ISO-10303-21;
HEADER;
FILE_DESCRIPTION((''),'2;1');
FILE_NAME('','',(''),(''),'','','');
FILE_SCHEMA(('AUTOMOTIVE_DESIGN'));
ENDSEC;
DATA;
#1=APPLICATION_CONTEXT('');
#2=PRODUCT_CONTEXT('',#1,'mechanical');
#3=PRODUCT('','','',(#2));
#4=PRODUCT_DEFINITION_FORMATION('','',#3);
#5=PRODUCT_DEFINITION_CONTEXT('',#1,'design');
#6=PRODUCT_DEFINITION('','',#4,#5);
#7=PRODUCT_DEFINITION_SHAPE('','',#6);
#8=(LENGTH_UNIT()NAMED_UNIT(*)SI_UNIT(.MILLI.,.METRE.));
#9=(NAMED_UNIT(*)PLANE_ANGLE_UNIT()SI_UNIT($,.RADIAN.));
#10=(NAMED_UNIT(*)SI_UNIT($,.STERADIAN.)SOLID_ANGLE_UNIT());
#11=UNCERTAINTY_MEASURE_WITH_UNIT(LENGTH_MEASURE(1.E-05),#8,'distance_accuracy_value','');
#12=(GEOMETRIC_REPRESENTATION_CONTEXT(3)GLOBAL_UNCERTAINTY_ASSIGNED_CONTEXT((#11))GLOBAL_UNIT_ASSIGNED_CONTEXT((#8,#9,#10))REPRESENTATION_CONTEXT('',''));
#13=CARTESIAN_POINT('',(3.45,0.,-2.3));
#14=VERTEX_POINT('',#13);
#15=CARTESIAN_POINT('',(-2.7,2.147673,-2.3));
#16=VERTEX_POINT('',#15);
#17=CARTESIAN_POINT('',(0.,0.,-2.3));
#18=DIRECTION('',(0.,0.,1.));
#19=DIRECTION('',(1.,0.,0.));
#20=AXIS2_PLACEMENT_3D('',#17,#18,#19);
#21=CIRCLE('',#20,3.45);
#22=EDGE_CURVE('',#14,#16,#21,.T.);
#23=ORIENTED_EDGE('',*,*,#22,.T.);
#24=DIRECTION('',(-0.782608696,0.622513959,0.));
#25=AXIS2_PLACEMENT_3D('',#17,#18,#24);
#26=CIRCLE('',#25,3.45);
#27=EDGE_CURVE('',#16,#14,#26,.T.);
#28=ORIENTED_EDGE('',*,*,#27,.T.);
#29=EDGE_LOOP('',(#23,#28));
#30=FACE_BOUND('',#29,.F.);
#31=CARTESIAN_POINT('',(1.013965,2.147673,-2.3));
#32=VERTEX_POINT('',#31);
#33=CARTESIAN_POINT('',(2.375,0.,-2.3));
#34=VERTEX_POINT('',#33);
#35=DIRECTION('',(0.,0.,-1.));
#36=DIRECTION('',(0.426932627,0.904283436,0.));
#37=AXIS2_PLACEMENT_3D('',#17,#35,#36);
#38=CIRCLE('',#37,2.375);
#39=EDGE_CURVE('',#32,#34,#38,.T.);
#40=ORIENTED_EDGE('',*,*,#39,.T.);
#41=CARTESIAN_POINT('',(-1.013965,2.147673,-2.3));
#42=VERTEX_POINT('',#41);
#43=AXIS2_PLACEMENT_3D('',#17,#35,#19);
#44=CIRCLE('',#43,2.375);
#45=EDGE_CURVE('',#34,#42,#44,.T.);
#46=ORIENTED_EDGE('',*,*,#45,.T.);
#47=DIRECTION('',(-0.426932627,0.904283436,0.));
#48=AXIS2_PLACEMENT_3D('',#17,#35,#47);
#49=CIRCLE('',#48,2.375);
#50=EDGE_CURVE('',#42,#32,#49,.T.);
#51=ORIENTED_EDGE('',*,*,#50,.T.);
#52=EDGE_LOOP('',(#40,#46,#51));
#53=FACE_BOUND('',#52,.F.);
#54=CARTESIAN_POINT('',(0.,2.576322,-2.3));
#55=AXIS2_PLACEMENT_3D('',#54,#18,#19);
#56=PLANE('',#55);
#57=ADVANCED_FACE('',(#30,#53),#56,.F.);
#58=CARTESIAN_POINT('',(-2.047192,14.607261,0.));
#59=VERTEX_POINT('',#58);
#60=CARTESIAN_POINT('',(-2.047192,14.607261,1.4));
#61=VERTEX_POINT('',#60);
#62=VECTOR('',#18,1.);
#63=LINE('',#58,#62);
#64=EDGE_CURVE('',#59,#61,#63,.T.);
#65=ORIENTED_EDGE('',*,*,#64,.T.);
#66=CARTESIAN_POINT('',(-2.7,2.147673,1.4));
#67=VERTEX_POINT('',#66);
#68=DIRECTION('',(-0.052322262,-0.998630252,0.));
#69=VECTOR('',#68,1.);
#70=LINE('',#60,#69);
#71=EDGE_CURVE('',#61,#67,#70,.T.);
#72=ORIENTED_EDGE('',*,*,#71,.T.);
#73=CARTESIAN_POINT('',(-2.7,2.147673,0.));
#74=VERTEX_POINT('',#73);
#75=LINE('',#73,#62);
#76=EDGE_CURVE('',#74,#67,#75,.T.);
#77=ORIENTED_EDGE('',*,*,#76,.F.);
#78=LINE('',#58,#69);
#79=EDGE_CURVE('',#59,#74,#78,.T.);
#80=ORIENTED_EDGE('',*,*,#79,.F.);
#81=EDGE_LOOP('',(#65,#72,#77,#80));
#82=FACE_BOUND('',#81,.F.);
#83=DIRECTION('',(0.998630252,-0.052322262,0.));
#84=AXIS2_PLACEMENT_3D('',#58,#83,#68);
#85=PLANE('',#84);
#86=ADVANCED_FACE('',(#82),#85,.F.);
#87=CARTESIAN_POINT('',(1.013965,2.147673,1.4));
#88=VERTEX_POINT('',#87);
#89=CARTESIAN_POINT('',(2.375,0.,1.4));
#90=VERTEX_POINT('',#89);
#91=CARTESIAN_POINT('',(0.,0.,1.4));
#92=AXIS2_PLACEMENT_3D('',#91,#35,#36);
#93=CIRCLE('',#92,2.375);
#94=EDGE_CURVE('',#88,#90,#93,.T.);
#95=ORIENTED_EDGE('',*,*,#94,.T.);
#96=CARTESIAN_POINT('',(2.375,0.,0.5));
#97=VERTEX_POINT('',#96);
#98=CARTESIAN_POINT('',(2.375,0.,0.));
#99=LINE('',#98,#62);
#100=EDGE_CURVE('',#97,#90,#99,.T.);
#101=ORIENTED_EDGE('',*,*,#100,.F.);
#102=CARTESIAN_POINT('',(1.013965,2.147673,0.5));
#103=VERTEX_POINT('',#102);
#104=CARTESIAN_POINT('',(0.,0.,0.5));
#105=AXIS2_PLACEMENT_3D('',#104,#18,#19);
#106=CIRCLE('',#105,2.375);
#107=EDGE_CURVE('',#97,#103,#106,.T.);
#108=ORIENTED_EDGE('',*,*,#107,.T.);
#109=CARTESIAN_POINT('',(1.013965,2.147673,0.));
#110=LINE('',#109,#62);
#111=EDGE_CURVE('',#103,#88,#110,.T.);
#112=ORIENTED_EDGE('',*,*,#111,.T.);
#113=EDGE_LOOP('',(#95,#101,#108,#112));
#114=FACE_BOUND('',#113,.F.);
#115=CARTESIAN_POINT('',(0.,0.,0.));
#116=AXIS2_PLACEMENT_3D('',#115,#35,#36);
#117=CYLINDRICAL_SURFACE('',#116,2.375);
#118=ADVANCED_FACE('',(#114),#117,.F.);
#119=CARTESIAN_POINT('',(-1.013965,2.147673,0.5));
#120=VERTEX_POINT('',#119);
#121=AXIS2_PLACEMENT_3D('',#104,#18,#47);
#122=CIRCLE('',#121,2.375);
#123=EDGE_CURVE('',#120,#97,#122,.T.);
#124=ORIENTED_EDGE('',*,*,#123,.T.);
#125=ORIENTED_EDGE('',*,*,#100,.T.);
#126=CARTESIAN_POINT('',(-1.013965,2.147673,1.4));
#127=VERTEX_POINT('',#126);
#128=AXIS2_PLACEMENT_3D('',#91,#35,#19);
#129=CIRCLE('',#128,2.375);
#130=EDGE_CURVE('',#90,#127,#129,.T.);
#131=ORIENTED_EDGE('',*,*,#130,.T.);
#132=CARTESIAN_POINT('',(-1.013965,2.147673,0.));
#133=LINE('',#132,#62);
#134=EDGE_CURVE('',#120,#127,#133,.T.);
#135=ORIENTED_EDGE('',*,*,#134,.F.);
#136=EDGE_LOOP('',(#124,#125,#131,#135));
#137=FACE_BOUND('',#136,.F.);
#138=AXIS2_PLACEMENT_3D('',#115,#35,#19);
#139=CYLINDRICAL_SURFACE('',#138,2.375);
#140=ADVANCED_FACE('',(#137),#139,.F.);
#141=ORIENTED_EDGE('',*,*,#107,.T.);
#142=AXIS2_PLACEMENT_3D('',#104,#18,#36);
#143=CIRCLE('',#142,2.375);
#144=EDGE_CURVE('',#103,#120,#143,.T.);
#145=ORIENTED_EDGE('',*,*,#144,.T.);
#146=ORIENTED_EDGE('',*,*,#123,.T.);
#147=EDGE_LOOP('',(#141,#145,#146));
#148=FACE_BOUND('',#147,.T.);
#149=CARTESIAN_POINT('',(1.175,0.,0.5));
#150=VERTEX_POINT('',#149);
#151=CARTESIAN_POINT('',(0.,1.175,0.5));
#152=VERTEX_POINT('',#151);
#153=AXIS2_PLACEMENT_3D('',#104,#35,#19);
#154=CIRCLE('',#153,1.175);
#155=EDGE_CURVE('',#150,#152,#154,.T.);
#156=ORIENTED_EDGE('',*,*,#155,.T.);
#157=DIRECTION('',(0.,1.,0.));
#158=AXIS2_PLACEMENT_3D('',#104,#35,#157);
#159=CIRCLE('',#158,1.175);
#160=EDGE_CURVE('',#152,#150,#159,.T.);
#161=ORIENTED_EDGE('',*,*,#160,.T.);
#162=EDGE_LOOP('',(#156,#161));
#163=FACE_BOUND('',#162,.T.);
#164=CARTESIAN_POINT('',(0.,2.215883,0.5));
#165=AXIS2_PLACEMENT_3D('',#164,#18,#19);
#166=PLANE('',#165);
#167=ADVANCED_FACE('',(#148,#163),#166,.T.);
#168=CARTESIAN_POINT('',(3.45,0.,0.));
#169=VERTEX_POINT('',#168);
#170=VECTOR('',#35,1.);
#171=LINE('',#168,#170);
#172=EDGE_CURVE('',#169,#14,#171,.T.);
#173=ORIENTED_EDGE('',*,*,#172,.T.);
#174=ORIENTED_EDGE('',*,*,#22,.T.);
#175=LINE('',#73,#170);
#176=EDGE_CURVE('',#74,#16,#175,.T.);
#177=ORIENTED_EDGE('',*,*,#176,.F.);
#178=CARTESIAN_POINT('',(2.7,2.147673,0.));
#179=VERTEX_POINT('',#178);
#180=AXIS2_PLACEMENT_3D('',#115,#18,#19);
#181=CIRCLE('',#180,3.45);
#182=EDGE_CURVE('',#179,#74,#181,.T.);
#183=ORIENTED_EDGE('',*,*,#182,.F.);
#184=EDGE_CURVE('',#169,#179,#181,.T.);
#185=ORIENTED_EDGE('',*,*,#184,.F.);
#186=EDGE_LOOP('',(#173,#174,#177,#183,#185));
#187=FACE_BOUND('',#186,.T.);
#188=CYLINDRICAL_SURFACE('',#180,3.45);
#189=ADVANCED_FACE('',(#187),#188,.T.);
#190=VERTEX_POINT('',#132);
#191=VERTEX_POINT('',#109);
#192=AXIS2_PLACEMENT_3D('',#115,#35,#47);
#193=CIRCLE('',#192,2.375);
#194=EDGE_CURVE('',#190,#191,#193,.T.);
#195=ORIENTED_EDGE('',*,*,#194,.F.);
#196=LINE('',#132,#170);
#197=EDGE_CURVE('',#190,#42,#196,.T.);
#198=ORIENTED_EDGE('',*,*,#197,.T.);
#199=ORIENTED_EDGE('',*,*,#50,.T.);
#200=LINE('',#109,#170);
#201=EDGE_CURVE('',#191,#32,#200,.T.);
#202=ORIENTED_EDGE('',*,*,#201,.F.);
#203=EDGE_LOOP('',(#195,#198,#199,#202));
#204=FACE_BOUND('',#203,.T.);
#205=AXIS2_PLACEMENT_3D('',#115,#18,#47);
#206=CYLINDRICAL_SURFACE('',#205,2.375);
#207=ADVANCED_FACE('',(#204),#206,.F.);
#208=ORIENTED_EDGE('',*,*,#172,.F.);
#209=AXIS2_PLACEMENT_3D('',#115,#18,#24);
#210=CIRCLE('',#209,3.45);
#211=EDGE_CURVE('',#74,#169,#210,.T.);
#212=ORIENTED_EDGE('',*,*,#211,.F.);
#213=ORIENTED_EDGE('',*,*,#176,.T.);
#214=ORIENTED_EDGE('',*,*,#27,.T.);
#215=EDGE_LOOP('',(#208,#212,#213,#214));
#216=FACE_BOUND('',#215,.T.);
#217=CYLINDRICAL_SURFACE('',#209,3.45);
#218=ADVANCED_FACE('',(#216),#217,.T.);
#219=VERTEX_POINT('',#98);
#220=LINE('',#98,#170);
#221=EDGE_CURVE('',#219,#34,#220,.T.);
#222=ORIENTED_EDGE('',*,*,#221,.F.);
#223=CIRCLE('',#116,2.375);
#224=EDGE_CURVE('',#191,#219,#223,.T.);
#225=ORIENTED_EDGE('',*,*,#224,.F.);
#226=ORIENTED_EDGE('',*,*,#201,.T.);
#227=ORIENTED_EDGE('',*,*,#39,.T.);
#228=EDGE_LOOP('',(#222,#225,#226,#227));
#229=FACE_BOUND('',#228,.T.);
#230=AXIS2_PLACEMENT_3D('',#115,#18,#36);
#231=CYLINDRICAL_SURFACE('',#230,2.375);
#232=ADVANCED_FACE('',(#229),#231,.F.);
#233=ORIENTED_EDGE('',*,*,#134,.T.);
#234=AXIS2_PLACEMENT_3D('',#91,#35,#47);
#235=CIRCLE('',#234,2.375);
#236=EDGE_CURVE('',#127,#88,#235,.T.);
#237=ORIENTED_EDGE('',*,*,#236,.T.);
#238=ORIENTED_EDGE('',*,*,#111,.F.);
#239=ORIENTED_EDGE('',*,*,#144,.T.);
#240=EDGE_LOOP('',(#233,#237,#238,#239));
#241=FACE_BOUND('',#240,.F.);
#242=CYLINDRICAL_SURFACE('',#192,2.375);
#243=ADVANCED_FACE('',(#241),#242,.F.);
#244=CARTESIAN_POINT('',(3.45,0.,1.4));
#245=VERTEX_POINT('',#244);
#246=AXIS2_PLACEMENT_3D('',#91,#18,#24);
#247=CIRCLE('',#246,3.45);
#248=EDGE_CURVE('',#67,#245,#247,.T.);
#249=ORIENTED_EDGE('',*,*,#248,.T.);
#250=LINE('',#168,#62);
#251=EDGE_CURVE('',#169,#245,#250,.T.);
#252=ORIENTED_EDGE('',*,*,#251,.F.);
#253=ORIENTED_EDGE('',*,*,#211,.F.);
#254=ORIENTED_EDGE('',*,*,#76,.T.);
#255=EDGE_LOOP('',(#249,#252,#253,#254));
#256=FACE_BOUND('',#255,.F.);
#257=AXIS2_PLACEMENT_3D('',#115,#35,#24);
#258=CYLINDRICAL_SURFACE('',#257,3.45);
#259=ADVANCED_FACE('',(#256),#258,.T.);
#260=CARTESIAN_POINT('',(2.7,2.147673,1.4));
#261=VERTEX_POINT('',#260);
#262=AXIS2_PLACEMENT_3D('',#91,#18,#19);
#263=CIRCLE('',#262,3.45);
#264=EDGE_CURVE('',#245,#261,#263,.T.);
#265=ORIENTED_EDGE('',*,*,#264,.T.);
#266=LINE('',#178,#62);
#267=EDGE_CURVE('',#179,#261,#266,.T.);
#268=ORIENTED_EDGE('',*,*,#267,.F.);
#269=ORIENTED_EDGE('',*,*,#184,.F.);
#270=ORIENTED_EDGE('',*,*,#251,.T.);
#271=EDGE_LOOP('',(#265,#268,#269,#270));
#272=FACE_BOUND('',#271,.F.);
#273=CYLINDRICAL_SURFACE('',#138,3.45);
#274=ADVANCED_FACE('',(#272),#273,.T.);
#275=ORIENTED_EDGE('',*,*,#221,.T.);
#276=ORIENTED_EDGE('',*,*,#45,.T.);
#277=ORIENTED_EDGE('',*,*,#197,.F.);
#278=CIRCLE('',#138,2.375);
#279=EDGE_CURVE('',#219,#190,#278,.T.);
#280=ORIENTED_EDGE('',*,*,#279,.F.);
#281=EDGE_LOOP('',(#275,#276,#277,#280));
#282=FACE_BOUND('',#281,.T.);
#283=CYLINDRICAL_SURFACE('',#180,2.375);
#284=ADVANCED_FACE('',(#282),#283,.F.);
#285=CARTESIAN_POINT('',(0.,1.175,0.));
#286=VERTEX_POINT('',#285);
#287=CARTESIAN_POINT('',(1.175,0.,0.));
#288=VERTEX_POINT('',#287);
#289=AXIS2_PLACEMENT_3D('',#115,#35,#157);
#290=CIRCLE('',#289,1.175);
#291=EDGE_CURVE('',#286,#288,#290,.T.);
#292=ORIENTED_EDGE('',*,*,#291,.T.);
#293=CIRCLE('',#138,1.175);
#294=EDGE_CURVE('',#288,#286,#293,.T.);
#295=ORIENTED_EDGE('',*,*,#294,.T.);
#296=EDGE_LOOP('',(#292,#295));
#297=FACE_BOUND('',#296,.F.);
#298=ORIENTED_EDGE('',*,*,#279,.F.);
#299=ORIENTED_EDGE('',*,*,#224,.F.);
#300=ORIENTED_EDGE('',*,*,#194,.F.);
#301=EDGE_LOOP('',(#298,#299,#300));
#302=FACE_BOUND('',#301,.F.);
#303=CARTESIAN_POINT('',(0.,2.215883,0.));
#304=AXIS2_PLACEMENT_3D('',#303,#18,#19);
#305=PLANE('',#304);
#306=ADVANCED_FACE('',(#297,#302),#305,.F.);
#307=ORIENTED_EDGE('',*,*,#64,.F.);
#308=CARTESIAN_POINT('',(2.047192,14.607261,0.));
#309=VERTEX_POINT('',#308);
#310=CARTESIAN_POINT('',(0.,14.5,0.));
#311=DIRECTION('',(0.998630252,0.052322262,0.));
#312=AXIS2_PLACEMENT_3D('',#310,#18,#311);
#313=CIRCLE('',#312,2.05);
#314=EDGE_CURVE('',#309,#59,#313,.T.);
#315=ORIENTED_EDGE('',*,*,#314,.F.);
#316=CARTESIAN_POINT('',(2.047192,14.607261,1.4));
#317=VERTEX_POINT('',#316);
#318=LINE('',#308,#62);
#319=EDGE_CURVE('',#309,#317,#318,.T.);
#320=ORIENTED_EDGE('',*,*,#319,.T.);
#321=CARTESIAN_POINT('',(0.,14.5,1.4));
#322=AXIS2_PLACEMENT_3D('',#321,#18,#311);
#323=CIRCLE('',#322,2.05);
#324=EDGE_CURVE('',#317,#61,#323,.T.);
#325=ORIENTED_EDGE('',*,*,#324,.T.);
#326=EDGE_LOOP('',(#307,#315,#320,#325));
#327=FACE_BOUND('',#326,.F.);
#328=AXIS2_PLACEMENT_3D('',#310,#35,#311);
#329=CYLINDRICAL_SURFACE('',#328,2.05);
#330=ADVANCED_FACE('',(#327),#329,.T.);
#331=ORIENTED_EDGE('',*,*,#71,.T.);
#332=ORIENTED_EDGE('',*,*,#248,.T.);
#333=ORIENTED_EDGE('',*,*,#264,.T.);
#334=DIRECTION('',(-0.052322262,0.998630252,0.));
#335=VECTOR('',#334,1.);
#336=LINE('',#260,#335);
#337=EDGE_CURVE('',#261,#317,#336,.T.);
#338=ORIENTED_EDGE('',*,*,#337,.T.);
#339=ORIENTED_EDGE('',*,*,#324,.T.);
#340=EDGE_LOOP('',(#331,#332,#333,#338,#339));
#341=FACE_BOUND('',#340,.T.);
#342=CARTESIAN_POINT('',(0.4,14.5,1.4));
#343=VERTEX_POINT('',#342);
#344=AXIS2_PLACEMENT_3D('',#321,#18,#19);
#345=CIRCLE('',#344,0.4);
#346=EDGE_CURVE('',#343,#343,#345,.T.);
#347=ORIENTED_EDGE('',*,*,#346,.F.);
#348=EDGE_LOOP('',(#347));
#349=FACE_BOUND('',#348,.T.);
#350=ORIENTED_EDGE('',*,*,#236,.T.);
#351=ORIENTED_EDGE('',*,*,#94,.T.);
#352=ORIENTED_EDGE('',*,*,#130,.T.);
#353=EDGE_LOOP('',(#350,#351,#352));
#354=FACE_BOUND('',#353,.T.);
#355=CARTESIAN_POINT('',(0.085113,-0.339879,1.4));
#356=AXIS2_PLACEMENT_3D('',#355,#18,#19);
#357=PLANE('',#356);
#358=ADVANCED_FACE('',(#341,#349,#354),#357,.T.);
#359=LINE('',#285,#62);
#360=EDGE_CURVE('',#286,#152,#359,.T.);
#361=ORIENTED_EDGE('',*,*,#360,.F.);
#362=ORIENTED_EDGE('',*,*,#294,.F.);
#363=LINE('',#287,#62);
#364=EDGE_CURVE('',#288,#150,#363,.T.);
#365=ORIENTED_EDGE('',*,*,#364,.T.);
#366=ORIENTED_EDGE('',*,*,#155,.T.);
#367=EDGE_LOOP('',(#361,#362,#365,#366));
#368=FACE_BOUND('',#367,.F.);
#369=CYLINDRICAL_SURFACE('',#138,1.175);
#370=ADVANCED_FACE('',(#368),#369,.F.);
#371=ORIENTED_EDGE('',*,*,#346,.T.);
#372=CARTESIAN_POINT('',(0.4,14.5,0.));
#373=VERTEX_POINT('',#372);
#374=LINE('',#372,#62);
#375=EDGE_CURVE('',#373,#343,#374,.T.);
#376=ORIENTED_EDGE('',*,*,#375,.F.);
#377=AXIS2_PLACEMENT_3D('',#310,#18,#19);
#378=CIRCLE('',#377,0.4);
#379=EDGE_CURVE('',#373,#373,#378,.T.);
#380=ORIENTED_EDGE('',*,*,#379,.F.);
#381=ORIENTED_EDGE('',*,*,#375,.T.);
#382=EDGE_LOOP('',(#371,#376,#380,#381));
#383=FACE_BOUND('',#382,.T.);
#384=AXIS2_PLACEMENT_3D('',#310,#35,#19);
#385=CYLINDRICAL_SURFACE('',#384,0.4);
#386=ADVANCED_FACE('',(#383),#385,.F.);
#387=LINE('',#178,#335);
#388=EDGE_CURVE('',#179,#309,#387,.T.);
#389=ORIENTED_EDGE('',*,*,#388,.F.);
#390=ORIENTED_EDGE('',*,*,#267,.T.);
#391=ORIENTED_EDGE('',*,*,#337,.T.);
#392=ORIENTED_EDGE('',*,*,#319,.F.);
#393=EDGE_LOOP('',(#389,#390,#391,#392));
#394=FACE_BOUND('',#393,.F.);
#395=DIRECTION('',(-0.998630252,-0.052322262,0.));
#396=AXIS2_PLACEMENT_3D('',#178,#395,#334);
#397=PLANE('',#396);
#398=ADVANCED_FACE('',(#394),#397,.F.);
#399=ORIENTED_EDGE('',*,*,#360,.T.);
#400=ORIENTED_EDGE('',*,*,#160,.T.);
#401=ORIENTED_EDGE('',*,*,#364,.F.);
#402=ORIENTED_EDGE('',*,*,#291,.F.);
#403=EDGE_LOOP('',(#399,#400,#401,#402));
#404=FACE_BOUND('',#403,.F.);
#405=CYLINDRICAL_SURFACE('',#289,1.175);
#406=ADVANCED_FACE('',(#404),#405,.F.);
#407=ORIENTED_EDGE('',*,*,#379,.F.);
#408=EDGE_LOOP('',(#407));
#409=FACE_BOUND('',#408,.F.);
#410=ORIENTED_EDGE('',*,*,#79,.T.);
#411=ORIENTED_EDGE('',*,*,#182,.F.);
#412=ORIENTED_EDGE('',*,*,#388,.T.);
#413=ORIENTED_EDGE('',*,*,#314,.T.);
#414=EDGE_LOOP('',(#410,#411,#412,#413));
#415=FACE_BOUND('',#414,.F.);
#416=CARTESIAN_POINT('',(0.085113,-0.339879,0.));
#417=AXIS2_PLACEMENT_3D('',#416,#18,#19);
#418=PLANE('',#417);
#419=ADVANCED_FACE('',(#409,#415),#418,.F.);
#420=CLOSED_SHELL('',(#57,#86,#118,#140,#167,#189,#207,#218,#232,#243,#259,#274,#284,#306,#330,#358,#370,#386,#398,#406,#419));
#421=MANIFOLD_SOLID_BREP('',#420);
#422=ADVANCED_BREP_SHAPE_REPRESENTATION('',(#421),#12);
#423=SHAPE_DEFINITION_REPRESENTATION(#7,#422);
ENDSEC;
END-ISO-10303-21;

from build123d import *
from build123d import SkipClean  # not in build123d's __all__

# Parameters (mm, degrees)
F0_R     = 0.4
F1_DEPTH = 1.4
F2_DEPTH = 2.3
F3_DEPTH = 0.5


with BuildPart() as f1:
    # F0 (on Top) → F1 (new body)
    with BuildSketch(Plane.XY):
        with BuildLine():
            ThreePointArc((-2.7, 2.1476731595), (-1.1374313166, -3.2571076126), (3.45, 0))
            ThreePointArc((3.45, 0), (3.2571076126, 1.1374313166), (2.7, 2.1476731595))
            Line((2.7, 2.1476731595), (1.0139649895, 2.1476731595))
            ThreePointArc((1.0139649895, 2.1476731595), (2.0060897101, 1.2713099838), (2.375, 0))
            ThreePointArc((2.375, 0), (-1.2713099838, -2.0060897101), (-1.0139649895, 2.1476731595))
            Line((-1.0139649895, 2.1476731595), (-2.7, 2.1476731595))
        make_face()
        with BuildLine():
            Line((1.0139649895, 2.1476731595), (2.7, 2.1476731595))
            ThreePointArc((2.7, 2.1476731595), (0, 3.45), (-2.7, 2.1476731595))
            Line((-2.7, 2.1476731595), (-1.0139649895, 2.1476731595))
            ThreePointArc((-1.0139649895, 2.1476731595), (0, 2.375), (1.0139649895, 2.1476731595))
        make_face()
        with BuildLine():
            ThreePointArc((-2.7, 2.1476731595), (0, 3.45), (2.7, 2.1476731595))
            Line((2.7, 2.1476731595), (2.0471920173, 14.6072606371))
            ThreePointArc((2.0471920173, 14.6072606371), (2.0492978841, 14.553648693), (2.05, 14.5))
            ThreePointArc((2.05, 14.5), (-0.053648693, 12.4507021159), (-2.0471920173, 14.6072606371))
            Line((-2.0471920173, 14.6072606371), (-2.7, 2.1476731595))
        make_face()
        with BuildLine():
            ThreePointArc((2.05, 14.5), (2.0492978841, 14.553648693), (2.0471920173, 14.6072606371))
            ThreePointArc((2.0471920173, 14.6072606371), (0, 16.55), (-2.0471920173, 14.6072606371))
            ThreePointArc((-2.0471920173, 14.6072606371), (-0.053648693, 12.4507021159), (2.05, 14.5))
        make_face()
        with Locations((0, 14.5)):
            Circle(F0_R, mode=Mode.SUBTRACT)
    extrude(amount=F1_DEPTH)

    # F0 (on Top) → F2 (join)
    with BuildSketch(Plane.XY):
        with BuildLine():
            Line((1.0139649895, 2.1476731595), (2.7, 2.1476731595))
            ThreePointArc((2.7, 2.1476731595), (0, 3.45), (-2.7, 2.1476731595))
            Line((-2.7, 2.1476731595), (-1.0139649895, 2.1476731595))
            ThreePointArc((-1.0139649895, 2.1476731595), (0, 2.375), (1.0139649895, 2.1476731595))
        make_face()
        with BuildLine():
            ThreePointArc((-2.7, 2.1476731595), (-1.1374313166, -3.2571076126), (3.45, 0))
            ThreePointArc((3.45, 0), (3.2571076126, 1.1374313166), (2.7, 2.1476731595))
            Line((2.7, 2.1476731595), (1.0139649895, 2.1476731595))
            ThreePointArc((1.0139649895, 2.1476731595), (2.0060897101, 1.2713099838), (2.375, 0))
            ThreePointArc((2.375, 0), (-1.2713099838, -2.0060897101), (-1.0139649895, 2.1476731595))
            Line((-1.0139649895, 2.1476731595), (-2.7, 2.1476731595))
        make_face()
    with SkipClean():  # cleaning this boolean's faces spoils the solid; the shape is the same uncleaned
        extrude(amount=-F2_DEPTH)

    # F0 (on Top) → F3 (join)
    with BuildSketch(Plane.XY):
        with BuildLine():
            Line((0, 2.1476731595), (1.0139649895, 2.1476731595))
            ThreePointArc((1.0139649895, 2.1476731595), (0, 2.375), (-1.0139649895, 2.1476731595))
            Line((-1.0139649895, 2.1476731595), (0, 2.1476731595))
        make_face()
        with BuildLine():
            ThreePointArc((2.375, 0), (2.0060897101, 1.2713099838), (1.0139649895, 2.1476731595))
            Line((1.0139649895, 2.1476731595), (0, 2.1476731595))
            Line((0, 2.1476731595), (-1.0139649895, 2.1476731595))
            ThreePointArc((-1.0139649895, 2.1476731595), (-1.2713099838, -2.0060897101), (2.375, 0))
        make_face()
        with BuildLine():
            ThreePointArc((1.175, 0), (-0.8308504679, -0.8308504679), (0, 1.175))
            ThreePointArc((0, 1.175), (0.8308504679, 0.8308504679), (1.175, 0))
        make_face(mode=Mode.SUBTRACT)
    extrude(amount=F3_DEPTH)


solid = f1.part
